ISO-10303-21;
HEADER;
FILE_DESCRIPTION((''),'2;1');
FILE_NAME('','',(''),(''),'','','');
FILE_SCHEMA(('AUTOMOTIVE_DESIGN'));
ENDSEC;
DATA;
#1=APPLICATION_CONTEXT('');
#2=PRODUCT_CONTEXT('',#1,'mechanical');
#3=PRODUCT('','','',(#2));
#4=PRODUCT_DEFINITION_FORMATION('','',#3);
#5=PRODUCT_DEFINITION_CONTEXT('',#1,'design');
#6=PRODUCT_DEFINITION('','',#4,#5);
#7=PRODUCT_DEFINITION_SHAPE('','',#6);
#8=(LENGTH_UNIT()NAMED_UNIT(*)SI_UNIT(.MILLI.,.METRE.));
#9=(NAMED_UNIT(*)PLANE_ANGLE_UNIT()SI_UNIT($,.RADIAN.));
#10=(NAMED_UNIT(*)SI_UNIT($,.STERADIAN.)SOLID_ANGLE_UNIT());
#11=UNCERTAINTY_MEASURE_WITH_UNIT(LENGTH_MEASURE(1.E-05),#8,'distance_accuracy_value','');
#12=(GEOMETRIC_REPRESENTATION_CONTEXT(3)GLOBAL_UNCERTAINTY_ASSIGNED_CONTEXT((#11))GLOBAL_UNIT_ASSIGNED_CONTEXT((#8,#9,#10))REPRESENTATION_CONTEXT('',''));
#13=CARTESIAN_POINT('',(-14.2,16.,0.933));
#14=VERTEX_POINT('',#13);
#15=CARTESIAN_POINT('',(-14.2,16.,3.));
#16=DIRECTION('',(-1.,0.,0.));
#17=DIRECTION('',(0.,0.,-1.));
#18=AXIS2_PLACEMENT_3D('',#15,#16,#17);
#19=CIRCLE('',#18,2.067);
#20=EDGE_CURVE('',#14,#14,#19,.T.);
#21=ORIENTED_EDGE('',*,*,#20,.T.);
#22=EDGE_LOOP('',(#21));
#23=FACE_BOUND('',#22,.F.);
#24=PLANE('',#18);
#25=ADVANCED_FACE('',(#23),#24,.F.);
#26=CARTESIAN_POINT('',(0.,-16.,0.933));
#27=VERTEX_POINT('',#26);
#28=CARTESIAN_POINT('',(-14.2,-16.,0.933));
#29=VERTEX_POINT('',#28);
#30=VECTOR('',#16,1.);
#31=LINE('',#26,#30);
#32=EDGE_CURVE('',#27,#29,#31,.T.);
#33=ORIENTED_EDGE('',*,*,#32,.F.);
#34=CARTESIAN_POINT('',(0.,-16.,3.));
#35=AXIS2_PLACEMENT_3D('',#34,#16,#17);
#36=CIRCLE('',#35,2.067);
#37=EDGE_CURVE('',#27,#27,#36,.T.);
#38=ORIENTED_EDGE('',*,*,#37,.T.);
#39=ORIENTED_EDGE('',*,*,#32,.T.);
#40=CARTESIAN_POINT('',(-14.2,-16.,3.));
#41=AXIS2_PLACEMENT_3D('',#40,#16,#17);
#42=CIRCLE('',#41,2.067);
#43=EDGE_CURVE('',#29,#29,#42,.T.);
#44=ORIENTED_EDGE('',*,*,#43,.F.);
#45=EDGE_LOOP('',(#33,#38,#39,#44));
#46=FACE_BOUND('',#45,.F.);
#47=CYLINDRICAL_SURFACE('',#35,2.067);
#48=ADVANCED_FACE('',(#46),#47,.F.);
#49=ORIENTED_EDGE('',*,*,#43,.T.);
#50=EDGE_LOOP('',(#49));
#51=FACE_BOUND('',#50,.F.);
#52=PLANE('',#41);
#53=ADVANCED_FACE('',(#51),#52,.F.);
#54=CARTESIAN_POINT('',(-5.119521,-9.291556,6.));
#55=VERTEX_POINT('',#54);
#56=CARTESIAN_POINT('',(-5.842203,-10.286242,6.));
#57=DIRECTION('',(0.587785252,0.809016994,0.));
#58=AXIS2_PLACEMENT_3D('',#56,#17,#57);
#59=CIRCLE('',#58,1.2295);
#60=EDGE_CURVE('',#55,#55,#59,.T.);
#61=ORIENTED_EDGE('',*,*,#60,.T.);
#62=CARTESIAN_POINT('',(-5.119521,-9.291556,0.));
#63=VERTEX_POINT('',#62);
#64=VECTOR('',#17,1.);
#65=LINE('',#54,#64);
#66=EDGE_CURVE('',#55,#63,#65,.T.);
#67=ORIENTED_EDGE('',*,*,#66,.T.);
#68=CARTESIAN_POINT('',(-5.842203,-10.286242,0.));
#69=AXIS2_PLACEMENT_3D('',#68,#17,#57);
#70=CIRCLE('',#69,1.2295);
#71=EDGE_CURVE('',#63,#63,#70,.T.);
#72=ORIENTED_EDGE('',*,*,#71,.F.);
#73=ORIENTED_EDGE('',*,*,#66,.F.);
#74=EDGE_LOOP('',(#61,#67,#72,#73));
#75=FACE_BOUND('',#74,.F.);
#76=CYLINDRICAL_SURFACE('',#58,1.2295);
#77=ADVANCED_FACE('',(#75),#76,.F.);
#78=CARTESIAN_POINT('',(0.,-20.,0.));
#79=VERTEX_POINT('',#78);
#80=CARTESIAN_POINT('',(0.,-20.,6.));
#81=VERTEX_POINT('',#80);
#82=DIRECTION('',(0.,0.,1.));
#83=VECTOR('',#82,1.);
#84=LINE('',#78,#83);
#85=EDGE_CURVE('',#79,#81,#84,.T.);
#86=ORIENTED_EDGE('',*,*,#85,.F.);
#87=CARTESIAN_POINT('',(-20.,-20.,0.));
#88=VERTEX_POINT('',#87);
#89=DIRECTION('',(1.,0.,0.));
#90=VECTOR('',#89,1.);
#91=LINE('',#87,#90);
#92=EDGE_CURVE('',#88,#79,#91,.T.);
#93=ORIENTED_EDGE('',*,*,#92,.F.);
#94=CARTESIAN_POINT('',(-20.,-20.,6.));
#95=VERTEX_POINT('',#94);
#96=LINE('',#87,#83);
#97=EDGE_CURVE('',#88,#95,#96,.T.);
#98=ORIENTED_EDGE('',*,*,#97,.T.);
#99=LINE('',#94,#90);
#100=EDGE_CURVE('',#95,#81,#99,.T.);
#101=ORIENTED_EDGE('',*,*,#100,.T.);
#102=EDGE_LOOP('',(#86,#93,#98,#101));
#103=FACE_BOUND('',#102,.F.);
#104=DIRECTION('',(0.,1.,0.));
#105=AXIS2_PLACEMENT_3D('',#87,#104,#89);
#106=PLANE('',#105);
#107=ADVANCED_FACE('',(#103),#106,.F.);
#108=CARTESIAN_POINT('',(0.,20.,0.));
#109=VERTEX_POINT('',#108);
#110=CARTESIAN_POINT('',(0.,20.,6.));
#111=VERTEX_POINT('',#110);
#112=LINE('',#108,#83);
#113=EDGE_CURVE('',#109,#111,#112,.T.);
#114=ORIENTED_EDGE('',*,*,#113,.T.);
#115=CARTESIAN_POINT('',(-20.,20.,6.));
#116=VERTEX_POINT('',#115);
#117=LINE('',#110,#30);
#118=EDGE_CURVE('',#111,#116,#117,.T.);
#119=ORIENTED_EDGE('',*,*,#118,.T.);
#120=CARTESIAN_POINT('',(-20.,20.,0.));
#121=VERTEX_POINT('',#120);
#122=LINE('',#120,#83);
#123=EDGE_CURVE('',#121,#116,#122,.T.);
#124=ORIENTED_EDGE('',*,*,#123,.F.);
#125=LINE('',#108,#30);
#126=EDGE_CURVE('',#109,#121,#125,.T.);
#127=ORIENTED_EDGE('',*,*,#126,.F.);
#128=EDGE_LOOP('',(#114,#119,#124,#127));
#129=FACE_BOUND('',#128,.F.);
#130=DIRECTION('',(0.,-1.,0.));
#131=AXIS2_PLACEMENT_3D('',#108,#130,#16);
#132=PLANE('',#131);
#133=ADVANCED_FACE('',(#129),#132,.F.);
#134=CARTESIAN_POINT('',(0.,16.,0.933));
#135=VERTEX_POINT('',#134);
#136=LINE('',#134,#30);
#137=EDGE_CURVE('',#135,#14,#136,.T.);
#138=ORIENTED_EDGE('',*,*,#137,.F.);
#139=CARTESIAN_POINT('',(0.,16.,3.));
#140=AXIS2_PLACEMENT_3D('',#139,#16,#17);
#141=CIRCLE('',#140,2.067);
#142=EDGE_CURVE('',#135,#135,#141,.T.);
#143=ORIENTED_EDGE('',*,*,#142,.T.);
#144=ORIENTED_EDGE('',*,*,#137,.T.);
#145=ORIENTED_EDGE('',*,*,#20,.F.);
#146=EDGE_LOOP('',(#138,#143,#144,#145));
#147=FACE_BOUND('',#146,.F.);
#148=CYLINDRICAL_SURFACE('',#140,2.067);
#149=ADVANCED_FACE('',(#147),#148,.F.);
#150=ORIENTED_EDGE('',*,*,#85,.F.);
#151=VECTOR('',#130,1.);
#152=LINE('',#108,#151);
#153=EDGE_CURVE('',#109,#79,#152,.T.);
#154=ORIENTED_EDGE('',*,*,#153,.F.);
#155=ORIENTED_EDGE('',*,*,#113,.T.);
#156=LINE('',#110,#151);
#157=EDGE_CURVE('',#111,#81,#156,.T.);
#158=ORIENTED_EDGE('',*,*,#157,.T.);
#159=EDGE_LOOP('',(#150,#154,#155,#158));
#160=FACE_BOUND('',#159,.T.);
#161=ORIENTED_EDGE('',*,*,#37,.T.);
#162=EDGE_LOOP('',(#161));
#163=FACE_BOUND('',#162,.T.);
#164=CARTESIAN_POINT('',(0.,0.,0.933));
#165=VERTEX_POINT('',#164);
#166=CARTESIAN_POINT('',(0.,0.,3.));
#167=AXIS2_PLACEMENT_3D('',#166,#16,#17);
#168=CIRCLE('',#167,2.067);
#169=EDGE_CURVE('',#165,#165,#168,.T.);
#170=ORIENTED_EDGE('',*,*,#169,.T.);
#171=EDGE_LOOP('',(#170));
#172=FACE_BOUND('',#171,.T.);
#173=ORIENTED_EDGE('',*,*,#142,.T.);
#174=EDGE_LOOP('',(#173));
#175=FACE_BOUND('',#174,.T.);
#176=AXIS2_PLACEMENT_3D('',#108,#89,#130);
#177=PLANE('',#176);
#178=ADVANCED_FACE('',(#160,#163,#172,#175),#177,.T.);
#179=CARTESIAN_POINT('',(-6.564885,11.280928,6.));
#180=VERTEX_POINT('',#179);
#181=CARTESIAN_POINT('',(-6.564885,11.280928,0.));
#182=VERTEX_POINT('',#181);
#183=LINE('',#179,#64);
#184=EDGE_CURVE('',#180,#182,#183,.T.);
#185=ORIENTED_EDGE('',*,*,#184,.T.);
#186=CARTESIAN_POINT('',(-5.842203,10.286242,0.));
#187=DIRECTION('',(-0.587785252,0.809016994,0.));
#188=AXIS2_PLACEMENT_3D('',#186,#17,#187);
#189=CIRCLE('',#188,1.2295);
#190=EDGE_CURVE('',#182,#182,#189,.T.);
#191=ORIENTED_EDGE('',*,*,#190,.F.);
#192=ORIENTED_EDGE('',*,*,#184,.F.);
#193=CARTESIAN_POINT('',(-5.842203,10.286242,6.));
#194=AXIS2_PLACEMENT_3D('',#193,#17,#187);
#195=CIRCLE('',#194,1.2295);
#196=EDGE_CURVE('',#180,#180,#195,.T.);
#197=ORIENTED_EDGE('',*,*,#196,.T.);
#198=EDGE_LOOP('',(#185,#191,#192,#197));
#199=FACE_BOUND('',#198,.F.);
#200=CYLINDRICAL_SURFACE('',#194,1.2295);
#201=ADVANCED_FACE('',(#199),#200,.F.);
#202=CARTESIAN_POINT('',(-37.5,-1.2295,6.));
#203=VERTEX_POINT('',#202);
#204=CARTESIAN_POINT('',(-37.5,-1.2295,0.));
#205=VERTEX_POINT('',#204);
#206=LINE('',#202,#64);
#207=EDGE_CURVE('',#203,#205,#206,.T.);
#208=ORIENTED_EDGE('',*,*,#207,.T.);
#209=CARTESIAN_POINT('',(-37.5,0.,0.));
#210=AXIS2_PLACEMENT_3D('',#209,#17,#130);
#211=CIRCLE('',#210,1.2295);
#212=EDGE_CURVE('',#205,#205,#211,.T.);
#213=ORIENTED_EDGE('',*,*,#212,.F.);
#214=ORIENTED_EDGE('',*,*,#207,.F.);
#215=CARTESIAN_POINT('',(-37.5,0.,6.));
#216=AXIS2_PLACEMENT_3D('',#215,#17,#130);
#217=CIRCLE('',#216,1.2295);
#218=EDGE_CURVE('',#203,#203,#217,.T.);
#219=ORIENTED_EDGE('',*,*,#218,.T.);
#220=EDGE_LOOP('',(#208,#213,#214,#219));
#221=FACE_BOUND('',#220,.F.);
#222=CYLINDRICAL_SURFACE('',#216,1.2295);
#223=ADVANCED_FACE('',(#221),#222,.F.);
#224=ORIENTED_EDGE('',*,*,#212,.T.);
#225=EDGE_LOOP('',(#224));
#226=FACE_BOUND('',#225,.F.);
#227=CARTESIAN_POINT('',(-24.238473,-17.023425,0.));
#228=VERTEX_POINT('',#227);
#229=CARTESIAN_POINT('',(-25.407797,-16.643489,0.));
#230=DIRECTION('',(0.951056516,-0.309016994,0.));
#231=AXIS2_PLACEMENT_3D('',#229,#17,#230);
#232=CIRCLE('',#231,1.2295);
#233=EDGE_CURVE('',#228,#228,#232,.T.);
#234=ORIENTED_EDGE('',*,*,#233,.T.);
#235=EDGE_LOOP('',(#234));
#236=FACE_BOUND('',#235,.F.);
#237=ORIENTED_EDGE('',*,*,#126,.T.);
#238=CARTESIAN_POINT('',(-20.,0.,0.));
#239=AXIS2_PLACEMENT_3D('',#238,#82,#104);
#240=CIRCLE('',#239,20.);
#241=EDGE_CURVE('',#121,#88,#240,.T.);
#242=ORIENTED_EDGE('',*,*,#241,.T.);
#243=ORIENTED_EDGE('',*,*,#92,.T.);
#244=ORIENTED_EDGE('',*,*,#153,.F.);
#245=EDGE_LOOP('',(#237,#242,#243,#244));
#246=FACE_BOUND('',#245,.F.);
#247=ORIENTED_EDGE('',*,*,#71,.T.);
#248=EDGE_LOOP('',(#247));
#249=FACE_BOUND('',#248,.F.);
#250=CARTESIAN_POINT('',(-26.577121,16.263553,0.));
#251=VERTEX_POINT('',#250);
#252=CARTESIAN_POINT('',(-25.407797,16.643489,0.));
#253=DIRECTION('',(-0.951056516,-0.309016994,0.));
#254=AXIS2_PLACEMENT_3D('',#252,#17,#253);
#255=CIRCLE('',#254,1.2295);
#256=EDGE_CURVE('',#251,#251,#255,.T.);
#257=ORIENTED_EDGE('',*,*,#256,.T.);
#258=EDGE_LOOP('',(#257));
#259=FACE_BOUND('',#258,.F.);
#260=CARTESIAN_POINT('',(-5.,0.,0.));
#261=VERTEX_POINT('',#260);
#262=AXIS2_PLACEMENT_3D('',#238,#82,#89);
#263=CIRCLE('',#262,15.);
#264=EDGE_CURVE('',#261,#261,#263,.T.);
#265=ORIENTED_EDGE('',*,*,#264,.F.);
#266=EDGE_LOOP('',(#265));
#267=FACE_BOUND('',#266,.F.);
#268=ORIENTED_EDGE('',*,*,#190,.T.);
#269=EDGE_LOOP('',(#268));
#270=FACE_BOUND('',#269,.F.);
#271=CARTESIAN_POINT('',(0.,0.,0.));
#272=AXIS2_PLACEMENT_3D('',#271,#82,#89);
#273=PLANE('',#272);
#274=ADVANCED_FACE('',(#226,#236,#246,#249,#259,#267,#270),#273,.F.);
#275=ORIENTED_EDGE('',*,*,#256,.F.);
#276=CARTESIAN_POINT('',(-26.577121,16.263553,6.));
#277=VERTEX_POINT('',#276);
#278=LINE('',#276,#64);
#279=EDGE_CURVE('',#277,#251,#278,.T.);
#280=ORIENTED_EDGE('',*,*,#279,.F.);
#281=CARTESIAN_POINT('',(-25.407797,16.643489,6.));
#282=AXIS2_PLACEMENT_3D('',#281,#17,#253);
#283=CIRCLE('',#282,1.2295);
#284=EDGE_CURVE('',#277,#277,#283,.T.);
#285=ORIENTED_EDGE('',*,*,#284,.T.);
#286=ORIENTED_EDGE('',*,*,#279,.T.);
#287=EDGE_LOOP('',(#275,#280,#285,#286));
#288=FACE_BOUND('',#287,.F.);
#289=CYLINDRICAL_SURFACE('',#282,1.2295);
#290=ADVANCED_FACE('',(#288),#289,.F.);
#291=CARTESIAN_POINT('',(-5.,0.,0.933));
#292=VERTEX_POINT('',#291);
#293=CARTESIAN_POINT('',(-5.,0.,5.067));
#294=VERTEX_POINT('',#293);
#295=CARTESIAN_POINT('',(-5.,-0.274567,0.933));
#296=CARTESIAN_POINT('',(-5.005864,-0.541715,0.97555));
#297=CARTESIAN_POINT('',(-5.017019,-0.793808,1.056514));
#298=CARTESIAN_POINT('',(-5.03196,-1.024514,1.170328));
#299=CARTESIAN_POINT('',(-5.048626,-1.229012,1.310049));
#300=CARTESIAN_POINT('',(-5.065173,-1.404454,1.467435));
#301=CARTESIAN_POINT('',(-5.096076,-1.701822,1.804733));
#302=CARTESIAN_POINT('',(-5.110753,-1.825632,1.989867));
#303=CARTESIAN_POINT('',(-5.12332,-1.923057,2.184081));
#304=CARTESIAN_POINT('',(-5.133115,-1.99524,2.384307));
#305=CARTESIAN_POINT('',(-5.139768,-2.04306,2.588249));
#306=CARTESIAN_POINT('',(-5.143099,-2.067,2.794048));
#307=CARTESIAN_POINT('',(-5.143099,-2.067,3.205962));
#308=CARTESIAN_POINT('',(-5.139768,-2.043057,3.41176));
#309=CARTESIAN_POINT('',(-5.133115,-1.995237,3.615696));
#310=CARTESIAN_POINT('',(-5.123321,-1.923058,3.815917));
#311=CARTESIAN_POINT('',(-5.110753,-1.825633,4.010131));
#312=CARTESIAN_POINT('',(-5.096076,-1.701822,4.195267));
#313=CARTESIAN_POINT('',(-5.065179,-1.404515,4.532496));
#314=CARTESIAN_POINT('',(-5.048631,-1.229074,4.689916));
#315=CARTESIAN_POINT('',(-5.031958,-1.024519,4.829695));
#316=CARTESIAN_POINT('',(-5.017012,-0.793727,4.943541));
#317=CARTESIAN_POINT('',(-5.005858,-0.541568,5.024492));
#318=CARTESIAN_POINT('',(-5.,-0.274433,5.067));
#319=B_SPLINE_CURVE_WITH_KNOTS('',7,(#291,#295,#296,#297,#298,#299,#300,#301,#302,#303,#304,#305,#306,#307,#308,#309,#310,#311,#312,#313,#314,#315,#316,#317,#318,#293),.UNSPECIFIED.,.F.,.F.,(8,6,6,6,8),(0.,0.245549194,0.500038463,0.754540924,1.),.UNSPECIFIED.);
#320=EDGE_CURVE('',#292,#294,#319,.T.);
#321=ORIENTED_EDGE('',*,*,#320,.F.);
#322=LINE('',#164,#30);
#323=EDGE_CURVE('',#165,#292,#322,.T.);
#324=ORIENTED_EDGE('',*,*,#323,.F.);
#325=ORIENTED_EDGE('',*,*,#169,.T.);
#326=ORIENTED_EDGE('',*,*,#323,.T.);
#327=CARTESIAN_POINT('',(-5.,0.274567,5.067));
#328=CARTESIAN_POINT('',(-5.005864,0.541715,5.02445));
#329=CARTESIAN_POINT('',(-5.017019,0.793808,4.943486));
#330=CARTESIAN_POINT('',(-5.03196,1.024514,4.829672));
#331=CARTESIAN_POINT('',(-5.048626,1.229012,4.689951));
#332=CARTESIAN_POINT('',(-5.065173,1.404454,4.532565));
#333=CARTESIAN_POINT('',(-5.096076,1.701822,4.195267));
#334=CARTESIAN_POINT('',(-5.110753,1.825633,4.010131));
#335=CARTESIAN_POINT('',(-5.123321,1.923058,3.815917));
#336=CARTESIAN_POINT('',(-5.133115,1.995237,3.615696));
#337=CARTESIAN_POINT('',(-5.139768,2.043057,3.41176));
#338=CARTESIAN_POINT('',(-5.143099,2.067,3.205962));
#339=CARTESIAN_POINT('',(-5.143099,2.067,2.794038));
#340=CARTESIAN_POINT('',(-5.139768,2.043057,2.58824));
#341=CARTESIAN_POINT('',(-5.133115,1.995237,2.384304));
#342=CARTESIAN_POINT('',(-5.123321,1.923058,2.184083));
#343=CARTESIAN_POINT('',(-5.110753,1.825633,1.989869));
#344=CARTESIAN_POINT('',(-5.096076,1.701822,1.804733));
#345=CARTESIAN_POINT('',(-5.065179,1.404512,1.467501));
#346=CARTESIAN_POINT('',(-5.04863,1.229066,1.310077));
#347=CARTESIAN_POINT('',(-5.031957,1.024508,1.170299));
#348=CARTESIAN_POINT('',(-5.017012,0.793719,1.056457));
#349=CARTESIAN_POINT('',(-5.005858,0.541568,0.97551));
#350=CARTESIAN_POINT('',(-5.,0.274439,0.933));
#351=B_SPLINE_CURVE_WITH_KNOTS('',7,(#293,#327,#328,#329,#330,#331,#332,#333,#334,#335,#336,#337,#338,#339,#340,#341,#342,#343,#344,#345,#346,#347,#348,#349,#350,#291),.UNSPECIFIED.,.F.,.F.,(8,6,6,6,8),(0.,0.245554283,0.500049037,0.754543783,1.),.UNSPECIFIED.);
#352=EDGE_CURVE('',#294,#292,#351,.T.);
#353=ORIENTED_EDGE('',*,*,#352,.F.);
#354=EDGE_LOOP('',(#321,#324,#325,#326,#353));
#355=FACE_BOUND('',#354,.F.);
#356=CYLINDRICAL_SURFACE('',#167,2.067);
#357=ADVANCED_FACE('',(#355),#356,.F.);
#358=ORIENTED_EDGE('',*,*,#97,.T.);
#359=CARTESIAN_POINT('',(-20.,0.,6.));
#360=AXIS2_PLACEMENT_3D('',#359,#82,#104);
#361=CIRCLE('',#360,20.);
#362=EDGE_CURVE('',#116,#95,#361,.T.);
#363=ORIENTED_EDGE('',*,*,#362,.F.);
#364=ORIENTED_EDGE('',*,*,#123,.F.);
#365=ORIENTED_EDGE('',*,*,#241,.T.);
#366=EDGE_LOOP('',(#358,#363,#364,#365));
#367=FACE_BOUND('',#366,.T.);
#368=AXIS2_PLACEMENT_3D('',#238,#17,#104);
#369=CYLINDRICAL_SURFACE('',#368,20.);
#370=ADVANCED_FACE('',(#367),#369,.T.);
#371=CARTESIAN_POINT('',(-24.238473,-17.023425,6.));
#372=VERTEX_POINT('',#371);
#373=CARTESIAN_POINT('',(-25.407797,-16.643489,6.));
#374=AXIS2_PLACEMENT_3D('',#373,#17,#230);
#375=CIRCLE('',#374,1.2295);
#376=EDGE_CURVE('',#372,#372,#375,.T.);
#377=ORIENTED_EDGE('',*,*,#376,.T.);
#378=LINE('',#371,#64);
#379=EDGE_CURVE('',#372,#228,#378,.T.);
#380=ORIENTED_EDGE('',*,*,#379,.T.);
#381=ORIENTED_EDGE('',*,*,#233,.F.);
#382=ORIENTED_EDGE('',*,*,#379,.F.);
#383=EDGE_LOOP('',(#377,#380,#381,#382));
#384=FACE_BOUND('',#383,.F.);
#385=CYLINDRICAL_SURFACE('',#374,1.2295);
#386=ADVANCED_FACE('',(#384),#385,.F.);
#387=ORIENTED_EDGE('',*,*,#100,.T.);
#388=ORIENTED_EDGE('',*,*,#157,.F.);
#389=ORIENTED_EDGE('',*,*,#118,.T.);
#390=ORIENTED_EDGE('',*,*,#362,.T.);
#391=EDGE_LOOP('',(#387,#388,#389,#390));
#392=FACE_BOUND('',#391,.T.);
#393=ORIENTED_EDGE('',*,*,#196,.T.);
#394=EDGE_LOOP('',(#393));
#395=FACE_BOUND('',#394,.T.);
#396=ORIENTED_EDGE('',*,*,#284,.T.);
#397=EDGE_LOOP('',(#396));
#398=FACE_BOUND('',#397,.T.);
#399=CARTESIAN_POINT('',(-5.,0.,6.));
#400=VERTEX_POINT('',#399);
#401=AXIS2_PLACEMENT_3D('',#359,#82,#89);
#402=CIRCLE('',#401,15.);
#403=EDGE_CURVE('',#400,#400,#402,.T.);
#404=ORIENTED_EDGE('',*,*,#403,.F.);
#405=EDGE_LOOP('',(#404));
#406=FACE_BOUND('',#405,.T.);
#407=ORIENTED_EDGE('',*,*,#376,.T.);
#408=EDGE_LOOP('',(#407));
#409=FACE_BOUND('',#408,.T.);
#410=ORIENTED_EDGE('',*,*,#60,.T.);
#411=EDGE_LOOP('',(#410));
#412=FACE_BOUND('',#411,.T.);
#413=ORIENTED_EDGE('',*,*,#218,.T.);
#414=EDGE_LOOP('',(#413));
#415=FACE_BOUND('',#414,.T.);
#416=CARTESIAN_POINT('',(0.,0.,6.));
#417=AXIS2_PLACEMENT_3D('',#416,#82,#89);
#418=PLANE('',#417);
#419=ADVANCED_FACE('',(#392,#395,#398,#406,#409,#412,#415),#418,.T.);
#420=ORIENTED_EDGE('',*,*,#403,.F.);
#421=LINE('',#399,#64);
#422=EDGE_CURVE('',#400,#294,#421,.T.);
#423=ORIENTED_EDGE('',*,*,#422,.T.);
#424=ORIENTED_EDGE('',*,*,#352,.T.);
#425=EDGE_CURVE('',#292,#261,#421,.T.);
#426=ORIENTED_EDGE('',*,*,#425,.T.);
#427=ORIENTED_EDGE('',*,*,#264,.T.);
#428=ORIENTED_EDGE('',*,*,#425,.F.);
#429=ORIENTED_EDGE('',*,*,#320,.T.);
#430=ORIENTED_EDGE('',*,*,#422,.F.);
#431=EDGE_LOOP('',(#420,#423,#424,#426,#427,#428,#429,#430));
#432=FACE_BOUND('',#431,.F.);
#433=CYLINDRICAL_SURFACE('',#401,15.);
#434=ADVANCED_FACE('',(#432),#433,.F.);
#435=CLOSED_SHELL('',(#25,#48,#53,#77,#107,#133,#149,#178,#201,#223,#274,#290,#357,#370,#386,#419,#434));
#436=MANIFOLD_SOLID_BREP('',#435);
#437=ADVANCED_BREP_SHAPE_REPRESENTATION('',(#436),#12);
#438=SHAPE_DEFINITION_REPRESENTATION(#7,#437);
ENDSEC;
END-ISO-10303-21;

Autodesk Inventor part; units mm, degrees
ref_plane "YZ Plane" through (0, 0, 0) normal (1, 0, 0) x (0, 1, 0)
ref_plane "XZ Plane" through (0, 0, 0) normal (0, 1, 0) x (-1, 0, 0)
ref_plane "XY Plane" through (0, 0, 0) normal (0, 0, 1) x (1, 0, 0)
sketch "Sketch1" plane through (0, 0, 0) normal (0, 0, 1) x (1, 0, 0)
  line L0 (0, 20) -> (0, -20)
  line L1 (0, 20) -> (-20, 20)
  arc A0 (-20, 20) -> (-20, -20) centre (-20, 0) ccw
  line L2 (-20, -20) -> (0, -20)
  point P0 (0, 0)
  point P1 (0, 0)
  dimension "d0" = 20
  dimension "d1" = 20
extrude "Extrusion1" add sketch "Sketch1" along normal blind 6
sketch "Sketch2" plane through (0, 0, 6) normal (0, 0, 1) x (1, 0, 0)
  circle A0 centre (-20, 0) radius 17.5 construction
  line L0 (0, -20) -> (0, 20) projected
  point P0 (0, 0)
  point P1 (0, 0)
  point P2 (-37.5, 0)
  point P3 (0, 0)
  dimension "d5" = 35
  dimension "d4" = 20
hole "Hole1" at (-37.5, 0, 6) direction (0, 0, -1) diameter 2.459 depth 6 thread size "M3x0.5" class "6H" standard "ISO Metric profile"
pattern_circular "Circular Pattern1" count 5 over 360 about axis through (-20, 0, 0) along (0, 0, 1) of "Hole1"
sketch "Sketch4" plane through (0, -20, 0) normal (1, 0, 0) x (0, 0, -1)
  line L0 (0, 0) -> (0, 40) projected
  line L1 (0, 40) -> (-6, 40) projected
  point P0 (0, 20)
  point P1 (-3, 36)
  point P2 (-3, 20)
  point P3 (-3, 4)
  point P4 (0, 20)
  point P5 (-3, 40)
  dimension "d16" = 32
  dimension "d17" = 16
hole "Hole2" at (0, 16, 3) at (0, -16, 3) direction (-1, 0, 0) diameter 4.134 depth 14.2 thread size "M5x0.8" class "6H" standard "ISO Metric profile"
hole "Hole3" at (0, 0, 3) direction (-1, 0, 0) diameter 4.134 depth 14.2 thread size "M5x0.8" class "6H" standard "ISO Metric profile"
sketch "Sketch5" plane through (0, 0, 6) normal (0, 0, 1) x (1, 0, 0)
  circle A0 centre (-20, 0) radius 15
  line L0 (0, -20) -> (0, 20) projected
  arc A1 (-20, 20) -> (-20, -20) centre (-20, 0) ccw projected
  point P0 (0, 0)
  point P1 (0, 0)
  point P2 (0, 0)
  dimension "d32" = 30
extrude "Extrusion2" cut sketch "Sketch5" against normal up to surface (6 mm away)
equation "\"d17\" = 0.5 * d16"
properties part number "34" material "Gold"
